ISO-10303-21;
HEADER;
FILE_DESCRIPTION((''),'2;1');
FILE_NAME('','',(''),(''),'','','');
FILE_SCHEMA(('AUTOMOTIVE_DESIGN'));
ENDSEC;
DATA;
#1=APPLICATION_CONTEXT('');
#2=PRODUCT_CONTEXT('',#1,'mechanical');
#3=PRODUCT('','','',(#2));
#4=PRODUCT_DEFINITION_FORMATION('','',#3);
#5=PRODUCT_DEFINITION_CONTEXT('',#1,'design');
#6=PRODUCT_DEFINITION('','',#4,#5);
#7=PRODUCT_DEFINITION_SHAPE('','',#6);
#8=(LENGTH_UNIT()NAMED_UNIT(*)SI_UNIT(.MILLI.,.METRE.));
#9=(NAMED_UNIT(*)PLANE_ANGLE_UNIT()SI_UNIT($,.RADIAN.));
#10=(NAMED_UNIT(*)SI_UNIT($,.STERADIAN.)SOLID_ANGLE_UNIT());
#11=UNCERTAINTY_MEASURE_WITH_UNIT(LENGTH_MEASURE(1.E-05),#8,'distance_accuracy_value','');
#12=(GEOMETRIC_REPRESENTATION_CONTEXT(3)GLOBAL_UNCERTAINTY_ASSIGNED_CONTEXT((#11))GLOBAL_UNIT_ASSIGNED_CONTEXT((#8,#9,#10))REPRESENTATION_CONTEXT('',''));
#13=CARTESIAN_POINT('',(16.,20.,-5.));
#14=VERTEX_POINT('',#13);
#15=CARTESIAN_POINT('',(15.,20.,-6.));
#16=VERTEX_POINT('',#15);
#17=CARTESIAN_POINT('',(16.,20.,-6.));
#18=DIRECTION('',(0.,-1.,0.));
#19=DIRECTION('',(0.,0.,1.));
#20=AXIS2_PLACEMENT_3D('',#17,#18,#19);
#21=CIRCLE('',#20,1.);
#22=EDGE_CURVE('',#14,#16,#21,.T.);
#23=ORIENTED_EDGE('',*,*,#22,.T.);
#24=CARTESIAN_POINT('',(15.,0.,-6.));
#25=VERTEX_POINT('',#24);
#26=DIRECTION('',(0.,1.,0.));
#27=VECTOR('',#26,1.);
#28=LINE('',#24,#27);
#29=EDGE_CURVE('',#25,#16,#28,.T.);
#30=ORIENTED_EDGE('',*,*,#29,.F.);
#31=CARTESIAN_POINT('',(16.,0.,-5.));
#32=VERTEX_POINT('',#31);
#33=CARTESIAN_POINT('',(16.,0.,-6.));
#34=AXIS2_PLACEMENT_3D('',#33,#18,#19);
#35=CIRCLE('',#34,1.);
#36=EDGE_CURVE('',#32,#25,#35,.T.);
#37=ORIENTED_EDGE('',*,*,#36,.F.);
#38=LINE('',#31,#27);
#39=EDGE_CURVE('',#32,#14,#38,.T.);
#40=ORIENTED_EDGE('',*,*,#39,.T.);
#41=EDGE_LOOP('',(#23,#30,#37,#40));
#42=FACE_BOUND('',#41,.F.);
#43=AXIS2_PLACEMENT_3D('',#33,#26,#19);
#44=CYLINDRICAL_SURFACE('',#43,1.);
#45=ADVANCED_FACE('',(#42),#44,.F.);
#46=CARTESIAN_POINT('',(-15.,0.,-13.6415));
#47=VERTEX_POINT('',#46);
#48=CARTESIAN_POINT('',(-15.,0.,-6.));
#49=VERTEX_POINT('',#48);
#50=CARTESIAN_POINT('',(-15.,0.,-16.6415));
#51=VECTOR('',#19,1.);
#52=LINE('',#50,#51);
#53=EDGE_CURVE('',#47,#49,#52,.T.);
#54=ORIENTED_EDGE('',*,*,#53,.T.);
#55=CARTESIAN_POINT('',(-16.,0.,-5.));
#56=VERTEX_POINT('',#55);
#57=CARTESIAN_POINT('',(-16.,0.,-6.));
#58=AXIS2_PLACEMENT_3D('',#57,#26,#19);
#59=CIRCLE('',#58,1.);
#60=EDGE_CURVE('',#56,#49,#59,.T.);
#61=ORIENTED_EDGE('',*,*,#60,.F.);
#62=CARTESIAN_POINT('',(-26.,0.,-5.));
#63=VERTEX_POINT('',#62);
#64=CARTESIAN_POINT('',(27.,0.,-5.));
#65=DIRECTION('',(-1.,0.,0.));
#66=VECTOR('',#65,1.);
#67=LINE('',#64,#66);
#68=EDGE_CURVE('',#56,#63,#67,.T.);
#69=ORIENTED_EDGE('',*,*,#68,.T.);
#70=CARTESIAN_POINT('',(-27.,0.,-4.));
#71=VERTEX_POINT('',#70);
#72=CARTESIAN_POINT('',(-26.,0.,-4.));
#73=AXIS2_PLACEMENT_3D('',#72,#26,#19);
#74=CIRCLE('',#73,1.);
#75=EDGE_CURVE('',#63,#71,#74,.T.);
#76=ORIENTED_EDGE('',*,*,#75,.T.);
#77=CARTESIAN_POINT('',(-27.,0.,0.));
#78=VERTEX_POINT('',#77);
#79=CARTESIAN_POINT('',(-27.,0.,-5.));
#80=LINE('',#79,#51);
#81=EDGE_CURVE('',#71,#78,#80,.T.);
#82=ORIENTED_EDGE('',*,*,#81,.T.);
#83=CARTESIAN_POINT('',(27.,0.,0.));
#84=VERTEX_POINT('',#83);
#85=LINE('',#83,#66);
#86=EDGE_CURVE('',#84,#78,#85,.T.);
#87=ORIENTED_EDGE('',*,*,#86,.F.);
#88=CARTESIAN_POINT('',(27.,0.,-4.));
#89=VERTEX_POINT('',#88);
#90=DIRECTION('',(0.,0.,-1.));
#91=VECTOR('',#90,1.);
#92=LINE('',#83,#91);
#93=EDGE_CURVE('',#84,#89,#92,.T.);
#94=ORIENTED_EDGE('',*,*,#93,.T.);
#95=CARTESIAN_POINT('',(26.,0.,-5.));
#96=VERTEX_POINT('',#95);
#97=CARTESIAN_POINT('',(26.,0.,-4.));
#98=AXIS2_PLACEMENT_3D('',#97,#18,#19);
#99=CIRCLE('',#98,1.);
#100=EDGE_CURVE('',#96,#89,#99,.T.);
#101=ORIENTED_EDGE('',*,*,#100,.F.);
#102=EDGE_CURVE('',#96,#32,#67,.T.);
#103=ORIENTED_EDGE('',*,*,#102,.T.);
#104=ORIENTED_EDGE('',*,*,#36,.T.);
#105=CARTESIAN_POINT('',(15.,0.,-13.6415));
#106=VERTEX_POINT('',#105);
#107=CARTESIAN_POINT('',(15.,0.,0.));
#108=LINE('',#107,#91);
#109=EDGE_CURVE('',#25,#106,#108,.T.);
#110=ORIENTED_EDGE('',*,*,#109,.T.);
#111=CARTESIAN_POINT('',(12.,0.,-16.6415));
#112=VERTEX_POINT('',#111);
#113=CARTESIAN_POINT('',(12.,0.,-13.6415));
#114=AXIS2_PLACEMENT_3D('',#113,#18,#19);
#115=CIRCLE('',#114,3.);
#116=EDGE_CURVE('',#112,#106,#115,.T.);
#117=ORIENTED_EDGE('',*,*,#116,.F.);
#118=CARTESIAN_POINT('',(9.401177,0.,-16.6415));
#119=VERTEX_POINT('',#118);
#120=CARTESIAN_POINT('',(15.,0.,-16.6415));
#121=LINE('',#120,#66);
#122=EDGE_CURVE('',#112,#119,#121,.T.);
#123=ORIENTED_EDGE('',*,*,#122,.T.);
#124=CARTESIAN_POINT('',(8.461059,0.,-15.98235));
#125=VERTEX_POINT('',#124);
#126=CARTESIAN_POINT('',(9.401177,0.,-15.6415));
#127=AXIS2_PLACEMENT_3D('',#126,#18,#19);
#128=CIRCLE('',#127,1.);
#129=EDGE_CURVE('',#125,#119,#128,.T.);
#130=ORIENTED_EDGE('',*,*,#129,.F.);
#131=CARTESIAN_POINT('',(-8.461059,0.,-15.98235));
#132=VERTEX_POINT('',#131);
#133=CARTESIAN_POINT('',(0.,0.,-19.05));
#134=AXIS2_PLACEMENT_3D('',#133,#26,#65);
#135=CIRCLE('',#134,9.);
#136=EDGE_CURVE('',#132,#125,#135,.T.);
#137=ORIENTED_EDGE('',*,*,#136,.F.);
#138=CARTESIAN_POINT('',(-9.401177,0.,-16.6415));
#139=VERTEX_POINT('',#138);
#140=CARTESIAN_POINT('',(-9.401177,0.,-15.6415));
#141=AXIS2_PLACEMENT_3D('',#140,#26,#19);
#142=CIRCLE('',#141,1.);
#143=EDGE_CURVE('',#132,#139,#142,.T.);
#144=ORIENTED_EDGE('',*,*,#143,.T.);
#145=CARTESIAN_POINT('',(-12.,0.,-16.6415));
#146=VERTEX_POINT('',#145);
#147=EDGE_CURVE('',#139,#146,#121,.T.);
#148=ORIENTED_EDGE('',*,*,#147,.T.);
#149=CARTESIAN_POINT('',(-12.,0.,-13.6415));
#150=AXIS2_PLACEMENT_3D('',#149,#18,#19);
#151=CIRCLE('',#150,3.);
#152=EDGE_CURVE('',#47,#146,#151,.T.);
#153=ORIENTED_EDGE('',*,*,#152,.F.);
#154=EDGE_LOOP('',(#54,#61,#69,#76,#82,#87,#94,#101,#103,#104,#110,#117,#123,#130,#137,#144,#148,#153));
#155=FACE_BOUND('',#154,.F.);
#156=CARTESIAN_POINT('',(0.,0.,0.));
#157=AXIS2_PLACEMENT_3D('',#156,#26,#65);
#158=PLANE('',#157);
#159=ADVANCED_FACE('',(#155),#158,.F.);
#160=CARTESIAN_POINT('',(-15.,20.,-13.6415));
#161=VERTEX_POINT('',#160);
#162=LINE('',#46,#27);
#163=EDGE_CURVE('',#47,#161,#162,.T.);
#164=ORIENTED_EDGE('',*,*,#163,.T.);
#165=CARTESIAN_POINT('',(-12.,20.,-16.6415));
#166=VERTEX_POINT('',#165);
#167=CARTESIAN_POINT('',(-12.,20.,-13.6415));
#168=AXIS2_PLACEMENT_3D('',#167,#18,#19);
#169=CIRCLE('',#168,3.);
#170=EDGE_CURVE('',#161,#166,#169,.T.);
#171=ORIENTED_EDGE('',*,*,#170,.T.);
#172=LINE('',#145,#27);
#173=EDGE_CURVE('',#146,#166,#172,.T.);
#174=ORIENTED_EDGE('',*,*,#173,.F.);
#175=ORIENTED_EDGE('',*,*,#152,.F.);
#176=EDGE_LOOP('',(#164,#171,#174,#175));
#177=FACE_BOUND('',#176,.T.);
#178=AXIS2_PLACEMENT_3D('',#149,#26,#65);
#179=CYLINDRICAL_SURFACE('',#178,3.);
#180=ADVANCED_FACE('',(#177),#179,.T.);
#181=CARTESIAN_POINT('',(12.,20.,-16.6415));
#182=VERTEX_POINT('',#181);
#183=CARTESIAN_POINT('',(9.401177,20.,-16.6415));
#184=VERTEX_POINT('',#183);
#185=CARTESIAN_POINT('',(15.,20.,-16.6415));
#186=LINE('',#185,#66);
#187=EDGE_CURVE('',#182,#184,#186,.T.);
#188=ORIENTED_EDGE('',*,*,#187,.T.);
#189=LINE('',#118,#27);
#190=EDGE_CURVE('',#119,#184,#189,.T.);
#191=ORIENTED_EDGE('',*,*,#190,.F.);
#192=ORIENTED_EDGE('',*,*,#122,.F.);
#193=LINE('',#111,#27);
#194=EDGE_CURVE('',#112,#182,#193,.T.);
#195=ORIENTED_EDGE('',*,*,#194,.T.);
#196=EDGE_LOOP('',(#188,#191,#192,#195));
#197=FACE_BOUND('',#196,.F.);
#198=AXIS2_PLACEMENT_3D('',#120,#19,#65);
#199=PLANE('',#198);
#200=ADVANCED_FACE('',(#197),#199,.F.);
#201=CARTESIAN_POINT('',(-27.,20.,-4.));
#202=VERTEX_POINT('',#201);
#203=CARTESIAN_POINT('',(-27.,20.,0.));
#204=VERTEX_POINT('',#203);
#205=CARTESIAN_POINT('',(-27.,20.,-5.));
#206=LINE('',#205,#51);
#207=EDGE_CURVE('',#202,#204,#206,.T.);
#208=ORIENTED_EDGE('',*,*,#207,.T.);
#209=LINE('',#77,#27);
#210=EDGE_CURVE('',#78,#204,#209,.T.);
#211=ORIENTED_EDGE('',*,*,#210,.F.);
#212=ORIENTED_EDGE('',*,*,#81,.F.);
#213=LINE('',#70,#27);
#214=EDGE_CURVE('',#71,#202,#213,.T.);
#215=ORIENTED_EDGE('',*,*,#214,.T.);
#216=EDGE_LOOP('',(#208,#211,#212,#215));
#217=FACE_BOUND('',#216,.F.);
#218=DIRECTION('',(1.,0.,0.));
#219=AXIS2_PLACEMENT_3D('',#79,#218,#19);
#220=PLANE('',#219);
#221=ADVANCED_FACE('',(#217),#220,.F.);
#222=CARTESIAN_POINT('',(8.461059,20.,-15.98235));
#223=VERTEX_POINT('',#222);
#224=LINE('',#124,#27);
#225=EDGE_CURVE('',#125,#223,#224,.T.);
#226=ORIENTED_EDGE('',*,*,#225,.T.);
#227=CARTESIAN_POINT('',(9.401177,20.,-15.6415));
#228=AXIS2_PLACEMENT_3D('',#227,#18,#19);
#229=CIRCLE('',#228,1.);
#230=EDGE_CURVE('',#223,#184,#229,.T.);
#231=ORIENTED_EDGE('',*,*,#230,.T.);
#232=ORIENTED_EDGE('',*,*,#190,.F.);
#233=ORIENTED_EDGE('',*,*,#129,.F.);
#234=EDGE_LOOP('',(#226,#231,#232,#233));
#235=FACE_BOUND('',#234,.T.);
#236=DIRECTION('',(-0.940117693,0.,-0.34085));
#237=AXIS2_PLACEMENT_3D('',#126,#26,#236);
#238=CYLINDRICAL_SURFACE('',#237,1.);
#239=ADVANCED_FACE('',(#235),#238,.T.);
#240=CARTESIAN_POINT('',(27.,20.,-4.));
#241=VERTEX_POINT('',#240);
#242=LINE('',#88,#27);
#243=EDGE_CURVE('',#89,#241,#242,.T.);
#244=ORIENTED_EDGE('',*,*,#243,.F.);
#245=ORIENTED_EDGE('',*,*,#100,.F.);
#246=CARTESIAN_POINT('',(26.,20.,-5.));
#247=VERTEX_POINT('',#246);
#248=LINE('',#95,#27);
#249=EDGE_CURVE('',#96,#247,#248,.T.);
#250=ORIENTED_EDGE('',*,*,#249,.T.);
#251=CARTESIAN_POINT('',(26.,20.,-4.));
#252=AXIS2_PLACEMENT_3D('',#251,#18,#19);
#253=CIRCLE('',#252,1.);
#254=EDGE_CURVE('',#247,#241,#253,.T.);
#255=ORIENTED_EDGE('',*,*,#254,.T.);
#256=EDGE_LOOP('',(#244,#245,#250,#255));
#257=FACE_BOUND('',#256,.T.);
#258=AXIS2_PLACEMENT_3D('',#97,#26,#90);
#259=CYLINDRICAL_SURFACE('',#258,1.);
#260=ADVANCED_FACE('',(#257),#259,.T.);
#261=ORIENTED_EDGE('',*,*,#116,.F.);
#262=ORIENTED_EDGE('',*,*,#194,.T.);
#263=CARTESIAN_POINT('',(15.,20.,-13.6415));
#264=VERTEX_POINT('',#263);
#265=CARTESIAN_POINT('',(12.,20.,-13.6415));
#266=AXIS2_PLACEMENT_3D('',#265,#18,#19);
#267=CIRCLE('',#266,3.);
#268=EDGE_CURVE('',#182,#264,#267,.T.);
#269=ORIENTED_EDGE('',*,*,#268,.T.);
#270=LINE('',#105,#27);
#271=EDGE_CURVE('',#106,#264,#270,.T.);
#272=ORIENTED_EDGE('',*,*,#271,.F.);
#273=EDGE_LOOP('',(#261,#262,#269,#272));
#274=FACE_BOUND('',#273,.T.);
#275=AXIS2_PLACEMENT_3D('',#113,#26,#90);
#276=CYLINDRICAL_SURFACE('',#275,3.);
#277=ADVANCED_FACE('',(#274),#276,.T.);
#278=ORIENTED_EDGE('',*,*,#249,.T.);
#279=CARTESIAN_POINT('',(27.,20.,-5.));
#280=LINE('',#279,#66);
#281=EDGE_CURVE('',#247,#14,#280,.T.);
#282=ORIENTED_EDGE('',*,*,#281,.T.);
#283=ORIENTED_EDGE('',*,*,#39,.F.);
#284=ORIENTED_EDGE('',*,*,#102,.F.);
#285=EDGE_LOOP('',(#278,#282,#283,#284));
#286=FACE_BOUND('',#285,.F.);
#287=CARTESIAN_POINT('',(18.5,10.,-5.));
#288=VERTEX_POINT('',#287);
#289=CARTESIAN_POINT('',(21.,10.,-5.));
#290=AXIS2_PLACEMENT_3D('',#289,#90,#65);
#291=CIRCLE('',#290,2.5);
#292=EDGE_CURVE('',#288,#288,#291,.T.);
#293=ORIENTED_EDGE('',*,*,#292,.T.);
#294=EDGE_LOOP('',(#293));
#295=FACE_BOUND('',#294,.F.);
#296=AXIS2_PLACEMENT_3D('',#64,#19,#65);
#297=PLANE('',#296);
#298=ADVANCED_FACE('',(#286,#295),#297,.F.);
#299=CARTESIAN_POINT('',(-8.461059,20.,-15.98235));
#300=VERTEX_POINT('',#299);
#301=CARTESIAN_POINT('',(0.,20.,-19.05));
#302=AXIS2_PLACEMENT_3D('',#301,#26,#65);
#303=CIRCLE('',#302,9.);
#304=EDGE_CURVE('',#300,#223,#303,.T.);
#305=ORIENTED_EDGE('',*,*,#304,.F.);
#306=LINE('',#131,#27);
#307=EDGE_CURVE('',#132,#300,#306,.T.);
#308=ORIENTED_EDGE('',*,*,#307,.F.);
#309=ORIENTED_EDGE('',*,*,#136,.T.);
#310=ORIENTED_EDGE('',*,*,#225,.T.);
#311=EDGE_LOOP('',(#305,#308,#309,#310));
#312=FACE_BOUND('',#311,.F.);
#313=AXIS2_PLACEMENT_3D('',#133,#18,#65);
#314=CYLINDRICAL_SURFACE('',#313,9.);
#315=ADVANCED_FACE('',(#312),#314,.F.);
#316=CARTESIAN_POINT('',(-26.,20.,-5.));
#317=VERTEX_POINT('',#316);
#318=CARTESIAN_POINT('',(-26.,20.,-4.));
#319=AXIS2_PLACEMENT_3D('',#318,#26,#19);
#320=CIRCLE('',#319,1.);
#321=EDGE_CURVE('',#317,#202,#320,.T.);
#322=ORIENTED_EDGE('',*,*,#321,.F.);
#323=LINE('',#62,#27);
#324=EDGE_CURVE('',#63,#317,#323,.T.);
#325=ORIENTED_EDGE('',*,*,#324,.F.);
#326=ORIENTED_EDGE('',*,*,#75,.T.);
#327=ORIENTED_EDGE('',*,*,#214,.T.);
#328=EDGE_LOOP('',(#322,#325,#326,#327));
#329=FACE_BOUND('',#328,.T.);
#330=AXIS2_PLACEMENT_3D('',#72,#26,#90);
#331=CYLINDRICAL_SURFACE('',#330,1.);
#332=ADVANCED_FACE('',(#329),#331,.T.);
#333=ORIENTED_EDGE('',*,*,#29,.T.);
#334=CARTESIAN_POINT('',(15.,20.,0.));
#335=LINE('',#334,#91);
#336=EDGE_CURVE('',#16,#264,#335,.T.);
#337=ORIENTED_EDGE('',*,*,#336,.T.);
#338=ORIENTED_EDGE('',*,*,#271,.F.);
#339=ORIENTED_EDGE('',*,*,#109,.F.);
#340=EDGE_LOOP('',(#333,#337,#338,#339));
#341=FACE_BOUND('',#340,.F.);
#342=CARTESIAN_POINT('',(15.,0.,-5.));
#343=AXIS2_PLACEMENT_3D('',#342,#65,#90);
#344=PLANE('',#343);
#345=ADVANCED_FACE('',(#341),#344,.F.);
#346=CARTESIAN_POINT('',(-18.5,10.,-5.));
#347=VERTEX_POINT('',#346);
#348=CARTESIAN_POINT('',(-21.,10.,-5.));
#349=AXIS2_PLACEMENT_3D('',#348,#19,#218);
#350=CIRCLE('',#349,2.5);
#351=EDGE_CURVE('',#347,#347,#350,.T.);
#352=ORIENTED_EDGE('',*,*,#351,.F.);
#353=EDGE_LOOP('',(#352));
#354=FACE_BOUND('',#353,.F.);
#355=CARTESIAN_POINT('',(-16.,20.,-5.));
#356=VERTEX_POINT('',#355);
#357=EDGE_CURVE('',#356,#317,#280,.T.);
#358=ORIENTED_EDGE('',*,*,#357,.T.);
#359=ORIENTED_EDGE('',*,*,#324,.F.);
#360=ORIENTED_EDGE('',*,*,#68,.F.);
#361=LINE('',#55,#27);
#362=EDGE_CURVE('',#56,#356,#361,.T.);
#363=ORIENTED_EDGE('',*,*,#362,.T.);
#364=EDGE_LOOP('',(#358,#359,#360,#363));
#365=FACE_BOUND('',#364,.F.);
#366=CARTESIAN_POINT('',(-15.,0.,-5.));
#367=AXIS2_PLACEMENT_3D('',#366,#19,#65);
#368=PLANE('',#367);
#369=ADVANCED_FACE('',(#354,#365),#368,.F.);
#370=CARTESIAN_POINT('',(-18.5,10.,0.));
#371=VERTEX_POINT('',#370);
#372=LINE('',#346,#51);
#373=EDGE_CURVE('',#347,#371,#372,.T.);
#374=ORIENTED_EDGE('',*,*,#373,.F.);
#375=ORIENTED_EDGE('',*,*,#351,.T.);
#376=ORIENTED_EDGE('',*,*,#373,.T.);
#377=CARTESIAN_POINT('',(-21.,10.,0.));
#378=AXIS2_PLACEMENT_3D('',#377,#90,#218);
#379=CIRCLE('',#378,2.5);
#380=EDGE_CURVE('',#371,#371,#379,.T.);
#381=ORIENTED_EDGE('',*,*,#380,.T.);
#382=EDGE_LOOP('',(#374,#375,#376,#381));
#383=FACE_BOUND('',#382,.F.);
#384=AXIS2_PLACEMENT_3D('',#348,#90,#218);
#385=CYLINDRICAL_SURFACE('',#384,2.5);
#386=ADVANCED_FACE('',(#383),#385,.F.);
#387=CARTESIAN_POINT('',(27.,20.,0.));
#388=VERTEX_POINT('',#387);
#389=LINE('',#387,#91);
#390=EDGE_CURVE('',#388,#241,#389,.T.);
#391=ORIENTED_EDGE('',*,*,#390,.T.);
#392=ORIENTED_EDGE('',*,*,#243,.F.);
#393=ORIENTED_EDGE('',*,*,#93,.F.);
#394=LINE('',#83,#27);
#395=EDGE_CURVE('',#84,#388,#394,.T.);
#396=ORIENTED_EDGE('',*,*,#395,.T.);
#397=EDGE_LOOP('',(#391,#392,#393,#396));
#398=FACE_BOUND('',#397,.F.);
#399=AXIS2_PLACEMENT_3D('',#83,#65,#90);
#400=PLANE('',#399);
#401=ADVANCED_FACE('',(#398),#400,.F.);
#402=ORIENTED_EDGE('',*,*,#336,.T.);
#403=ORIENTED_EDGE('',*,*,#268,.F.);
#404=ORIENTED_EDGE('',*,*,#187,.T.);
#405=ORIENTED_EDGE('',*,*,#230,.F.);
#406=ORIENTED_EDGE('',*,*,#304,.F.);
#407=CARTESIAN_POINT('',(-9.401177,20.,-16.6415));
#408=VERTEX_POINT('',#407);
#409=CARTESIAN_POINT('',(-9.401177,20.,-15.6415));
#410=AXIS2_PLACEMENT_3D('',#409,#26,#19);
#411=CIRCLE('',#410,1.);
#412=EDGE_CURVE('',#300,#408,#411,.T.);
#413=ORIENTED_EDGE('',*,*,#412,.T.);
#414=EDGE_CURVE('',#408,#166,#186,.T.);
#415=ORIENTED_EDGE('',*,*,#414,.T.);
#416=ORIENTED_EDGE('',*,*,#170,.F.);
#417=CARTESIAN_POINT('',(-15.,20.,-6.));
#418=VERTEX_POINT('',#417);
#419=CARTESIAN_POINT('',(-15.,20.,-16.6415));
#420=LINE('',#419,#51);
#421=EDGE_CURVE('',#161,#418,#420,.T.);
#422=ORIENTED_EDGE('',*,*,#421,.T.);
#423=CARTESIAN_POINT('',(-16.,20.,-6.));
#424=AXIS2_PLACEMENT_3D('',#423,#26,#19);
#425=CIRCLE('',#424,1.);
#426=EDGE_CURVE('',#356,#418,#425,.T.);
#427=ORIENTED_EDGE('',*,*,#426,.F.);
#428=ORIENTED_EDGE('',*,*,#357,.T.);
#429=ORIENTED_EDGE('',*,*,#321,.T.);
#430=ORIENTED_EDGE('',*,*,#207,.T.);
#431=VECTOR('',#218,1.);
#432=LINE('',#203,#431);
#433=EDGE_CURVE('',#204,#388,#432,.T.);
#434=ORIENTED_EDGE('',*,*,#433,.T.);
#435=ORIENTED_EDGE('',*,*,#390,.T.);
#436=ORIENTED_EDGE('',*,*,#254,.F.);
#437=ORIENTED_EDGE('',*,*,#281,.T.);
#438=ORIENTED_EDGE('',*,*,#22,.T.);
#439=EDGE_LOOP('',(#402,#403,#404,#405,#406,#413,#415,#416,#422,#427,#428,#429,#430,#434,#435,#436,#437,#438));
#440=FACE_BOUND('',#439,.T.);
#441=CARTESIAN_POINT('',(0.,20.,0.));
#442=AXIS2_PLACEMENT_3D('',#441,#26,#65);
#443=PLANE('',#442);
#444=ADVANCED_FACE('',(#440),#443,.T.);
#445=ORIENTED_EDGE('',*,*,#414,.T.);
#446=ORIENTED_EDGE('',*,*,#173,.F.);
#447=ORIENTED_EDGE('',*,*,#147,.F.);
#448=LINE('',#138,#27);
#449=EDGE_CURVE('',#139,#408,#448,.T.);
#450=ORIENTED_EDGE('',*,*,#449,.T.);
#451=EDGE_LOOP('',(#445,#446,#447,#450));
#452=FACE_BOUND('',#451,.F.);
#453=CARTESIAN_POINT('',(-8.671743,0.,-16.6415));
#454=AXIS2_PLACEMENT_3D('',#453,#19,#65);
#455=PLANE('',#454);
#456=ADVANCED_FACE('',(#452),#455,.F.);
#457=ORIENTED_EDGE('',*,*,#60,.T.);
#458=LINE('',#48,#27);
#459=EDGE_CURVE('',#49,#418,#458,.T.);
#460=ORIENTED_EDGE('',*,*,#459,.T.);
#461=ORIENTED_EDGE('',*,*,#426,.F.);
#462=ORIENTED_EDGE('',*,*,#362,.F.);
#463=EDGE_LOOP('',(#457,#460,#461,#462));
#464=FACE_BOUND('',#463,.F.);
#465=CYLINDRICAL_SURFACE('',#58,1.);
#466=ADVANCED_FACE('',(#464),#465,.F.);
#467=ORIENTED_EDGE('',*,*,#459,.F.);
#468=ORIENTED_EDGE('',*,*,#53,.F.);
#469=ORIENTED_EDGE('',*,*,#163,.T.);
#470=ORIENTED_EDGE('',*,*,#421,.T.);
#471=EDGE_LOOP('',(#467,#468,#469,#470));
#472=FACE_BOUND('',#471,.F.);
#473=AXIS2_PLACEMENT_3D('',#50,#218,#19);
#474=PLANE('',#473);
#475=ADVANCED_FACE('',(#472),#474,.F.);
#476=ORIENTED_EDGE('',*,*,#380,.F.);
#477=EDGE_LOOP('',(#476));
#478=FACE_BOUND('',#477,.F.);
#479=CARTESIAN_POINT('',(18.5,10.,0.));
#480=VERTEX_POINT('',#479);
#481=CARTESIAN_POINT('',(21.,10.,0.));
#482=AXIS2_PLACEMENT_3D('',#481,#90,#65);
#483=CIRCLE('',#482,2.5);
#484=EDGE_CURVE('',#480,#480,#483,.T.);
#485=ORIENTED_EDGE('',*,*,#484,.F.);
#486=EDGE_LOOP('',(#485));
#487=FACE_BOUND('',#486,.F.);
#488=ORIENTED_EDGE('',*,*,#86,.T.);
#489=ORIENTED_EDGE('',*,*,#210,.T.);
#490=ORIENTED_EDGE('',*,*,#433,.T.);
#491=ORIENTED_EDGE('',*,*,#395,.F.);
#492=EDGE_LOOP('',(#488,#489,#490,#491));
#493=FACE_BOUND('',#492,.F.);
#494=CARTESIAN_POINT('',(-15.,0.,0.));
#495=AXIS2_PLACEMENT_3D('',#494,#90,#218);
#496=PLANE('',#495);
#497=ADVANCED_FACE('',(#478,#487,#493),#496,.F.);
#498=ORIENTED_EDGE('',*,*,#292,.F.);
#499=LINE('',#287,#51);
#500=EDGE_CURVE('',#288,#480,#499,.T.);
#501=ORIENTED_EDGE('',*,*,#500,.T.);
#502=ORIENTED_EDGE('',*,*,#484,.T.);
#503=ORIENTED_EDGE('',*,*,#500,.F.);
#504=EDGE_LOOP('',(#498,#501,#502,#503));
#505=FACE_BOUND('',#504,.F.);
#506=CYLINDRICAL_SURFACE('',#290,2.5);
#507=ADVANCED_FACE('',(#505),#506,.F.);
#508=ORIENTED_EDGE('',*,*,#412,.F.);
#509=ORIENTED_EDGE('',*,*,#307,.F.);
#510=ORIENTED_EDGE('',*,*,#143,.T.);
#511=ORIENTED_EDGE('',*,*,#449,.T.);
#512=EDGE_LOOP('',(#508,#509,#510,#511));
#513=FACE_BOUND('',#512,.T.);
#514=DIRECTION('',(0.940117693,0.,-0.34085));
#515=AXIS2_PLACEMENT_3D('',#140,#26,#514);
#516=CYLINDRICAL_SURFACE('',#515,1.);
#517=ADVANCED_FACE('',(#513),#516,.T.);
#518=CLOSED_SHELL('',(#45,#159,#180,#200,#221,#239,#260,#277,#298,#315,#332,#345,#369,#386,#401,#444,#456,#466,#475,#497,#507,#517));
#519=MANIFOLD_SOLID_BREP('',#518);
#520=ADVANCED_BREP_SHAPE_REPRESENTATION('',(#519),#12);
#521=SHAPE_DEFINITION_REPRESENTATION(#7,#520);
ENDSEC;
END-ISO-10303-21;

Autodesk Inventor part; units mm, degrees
ref_plane "YZ Plane" through (0, 0, 0) normal (1, 0, 0) x (0, 1, 0)
ref_plane "XZ Plane" through (0, 0, 0) normal (0, 1, 0) x (-1, 0, 0)
ref_plane "XY Plane" through (0, 0, 0) normal (0, 0, 1) x (1, 0, 0)
sketch "Sketch1" plane through (0, 0, 0) normal (0, 1, 0) x (-1, 0, 0)
  circle A0 centre (0, -19.05) radius 9
  line L0 (15, 0) -> (-15, 0)
  line L1 (-15, 0) -> (-15, -16.6415)
  line L2 (-15, -16.6415) -> (15, -16.6415)
  line L3 (15, -16.6415) -> (15, 0)
  line L4 (-27, -5) -> (27, -5)
  line L5 (27, -5) -> (27, 0)
  line L6 (27, 0) -> (-27, 0)
  line L7 (-27, 0) -> (-27, -5)
  line L8 (-27, -5) -> (27, 0) construction
  line L9 (27, -5) -> (-27, 0) construction
  point P0 (0, 0)
  point P1 (0, -2.5)
  point P2 (0, -2.5)
  point P3 (0, -2.5)
  point P4 (15, -5)
  point P5 (15, 0)
  point P6 (-15, -5)
  point P7 (-15, 0)
  point P8 (0, 0)
  dimension "d0" = 18
  dimension "d1" = 19.05
  dimension "d5" = 15
  dimension "d6" = 15
  dimension "d7" = 27
  dimension "d13" = 5
extrude "Extrusion1" add sketch "Sketch1" along normal blind 20 contours A0 L2 L1 L4 L3 | L4 L1 L0 L3 | L3 L6 L5 L4 | L4 L7 L6 L1
sketch "Sketch2" plane through (27, 0, -5) normal (0, 0, -1) x (-1, 0, 0)
  circle A0 centre (6, 10) radius 2.5
  line L0 (0, 0) -> (0, 20) projected
  line L1 (0, 20) -> (12, 20) projected
  point P0 (27, 0)
  point P1 (6, 20)
  dimension "d10" = 6
  dimension "d11" = 10
  dimension "d12" = 5
extrude "Extrusion2" cut sketch "Sketch2" against normal through all
mirror "Mirror1" about plane through (0, 0, 0) normal (1, 0, 0) of "Extrusion2"
fillet "Fillet2" radius 1 2 edges at (8.6718, 10, -16.6415) (-8.6718, 10, -16.6415)
fillet "Fillet3" radius 1 2 edges at (27, 10, -5) (-27, 10, -5)
sketch "Sketch3" plane through (-15, 0, -5) normal (0, 0, -1) x (-1, 0, 0)
  circle A0 centre (6, 10) radius 2.5 projected
  circle A1 centre (6, 10) radius 5
  line L0 (11, 20) -> (11, 0) projected
  point P0 (-15, 0)
fillet "Fillet4" radius 1 2 edges at (15, 10, -5) (-15, 10, -5)
fillet "Fillet5" radius 3 2 edges at (15, 10, -16.6415) (-15, 10, -16.6415)
properties part number "Shaft support"
